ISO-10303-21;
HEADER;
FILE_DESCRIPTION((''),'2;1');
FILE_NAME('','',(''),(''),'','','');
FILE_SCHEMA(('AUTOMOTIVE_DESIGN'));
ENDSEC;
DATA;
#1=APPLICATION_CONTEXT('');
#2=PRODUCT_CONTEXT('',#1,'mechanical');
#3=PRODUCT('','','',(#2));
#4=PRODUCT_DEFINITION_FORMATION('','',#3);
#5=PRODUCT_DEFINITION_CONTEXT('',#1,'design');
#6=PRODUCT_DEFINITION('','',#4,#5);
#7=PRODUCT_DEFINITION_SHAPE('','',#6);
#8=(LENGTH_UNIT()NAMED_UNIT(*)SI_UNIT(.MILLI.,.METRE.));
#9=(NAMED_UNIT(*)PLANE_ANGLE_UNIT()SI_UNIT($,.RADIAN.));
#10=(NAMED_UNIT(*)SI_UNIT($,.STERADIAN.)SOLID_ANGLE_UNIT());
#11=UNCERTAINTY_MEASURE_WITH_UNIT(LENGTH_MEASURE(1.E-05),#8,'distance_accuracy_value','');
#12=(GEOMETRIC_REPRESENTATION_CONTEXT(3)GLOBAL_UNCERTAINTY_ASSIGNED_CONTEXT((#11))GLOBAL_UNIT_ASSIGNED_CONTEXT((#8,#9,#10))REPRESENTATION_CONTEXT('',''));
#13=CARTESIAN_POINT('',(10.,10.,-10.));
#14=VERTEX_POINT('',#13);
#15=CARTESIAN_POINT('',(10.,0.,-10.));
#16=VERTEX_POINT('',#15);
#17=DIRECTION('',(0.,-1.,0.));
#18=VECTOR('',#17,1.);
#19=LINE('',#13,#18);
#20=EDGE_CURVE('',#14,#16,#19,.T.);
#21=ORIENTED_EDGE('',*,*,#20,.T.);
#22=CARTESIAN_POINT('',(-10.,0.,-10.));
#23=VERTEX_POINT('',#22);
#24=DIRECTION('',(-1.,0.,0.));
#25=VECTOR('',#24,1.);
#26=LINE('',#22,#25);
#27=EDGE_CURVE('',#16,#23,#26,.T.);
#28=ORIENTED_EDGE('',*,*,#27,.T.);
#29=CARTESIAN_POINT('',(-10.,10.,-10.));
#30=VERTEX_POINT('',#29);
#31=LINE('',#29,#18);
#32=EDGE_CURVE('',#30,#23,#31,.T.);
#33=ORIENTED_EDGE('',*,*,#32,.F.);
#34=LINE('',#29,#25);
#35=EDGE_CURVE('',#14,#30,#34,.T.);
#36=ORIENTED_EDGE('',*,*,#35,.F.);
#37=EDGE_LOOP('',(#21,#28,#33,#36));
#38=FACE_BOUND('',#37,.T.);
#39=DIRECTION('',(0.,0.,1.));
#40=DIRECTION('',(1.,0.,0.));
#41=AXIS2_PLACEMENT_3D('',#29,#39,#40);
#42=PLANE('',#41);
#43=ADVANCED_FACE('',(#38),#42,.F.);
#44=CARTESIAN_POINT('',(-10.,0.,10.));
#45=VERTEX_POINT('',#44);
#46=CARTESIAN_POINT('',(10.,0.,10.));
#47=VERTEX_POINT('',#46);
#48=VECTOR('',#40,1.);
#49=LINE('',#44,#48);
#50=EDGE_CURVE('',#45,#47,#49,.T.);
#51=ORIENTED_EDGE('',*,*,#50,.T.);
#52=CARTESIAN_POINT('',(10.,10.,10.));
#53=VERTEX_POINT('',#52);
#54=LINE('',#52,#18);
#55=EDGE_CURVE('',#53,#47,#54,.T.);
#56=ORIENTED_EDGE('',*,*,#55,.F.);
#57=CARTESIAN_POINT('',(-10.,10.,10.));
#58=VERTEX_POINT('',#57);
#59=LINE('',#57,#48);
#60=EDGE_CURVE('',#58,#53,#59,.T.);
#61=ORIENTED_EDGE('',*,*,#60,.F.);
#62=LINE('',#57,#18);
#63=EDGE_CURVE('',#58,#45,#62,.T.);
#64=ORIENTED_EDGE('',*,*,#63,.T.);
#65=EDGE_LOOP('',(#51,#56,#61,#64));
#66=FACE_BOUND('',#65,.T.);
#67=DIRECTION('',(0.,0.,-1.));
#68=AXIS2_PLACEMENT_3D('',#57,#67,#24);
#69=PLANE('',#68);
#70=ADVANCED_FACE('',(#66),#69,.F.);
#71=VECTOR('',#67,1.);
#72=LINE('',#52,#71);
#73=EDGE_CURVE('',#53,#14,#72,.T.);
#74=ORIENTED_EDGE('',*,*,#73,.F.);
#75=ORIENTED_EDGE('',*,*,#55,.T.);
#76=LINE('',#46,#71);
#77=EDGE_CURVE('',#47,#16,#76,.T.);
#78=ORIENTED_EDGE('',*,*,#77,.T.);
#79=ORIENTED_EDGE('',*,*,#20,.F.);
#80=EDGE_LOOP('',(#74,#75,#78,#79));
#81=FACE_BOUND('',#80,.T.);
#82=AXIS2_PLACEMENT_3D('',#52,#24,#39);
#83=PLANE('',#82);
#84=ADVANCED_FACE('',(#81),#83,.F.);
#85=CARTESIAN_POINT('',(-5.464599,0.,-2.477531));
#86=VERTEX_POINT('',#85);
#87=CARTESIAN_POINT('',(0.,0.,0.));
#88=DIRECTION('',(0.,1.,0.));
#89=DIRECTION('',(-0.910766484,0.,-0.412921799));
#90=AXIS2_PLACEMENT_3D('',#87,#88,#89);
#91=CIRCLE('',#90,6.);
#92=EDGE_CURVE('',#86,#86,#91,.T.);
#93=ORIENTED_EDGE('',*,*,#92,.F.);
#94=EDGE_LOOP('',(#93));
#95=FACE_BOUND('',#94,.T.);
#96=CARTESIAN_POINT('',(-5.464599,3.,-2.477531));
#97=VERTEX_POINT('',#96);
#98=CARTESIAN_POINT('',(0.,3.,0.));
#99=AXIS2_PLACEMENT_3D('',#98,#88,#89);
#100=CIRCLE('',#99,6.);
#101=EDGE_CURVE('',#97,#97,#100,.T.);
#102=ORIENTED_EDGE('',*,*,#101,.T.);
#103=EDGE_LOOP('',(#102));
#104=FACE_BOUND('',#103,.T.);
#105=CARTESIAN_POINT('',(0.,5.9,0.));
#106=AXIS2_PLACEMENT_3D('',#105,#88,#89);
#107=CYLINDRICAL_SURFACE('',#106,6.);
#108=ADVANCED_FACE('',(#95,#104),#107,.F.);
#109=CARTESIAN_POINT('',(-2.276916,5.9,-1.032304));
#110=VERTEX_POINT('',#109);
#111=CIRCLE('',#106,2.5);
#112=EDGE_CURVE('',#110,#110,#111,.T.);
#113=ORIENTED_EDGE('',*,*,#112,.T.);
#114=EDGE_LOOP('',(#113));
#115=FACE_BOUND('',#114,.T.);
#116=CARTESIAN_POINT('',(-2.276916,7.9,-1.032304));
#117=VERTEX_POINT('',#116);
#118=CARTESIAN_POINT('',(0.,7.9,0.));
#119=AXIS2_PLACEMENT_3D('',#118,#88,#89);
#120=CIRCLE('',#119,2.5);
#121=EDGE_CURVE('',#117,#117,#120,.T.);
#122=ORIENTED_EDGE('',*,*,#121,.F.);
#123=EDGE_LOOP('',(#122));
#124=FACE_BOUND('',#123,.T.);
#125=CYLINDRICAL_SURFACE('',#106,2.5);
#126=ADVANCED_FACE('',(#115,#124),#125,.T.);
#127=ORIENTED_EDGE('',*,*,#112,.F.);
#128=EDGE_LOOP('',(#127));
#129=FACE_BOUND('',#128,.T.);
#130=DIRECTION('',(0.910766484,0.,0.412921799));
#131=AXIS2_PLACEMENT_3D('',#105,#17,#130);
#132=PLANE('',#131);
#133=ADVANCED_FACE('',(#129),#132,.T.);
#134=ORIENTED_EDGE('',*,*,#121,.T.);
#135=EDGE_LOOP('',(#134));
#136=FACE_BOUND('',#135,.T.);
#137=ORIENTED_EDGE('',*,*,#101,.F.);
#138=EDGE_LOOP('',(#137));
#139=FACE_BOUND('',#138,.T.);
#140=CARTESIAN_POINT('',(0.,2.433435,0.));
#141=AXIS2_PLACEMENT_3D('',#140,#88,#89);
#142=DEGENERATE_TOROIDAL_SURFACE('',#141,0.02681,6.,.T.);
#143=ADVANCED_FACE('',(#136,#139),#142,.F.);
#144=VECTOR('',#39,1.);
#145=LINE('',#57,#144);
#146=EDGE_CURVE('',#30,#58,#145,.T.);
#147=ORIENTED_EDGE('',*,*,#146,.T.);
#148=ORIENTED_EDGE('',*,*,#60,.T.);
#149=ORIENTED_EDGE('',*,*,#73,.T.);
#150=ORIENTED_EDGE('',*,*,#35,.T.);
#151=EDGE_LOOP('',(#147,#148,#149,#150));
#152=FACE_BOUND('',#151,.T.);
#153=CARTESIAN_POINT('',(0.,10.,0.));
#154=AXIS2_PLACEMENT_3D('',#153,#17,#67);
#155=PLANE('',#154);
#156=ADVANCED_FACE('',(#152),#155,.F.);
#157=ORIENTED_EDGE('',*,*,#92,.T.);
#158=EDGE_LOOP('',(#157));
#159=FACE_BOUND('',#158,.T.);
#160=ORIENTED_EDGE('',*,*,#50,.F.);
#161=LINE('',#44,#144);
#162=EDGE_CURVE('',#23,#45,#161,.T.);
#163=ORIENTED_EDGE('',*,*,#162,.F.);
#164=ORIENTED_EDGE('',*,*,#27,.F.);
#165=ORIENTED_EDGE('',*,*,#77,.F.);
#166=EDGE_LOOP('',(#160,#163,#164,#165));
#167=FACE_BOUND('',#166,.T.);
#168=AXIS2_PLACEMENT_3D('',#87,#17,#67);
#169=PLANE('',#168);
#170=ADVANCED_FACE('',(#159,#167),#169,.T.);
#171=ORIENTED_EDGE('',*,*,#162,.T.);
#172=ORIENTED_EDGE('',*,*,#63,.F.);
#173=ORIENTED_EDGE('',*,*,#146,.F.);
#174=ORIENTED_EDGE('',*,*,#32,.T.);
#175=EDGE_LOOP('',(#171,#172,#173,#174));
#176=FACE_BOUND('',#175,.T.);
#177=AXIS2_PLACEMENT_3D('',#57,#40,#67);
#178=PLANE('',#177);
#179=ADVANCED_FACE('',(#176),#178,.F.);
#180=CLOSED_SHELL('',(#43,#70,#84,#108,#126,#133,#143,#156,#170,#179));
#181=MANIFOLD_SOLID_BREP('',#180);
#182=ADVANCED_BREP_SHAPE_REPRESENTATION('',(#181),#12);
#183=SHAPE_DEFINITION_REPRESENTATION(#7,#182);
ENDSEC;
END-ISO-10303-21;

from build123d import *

# Parameters (mm, degrees)
SKETCH1_W           = 20
SKETCH1_H           = 20
BOSS_EXTRUDE1_DEPTH = 10


# Read off the part's stored shape, not the designer's step: Cavity1
with BuildPart() as part:
    # Sketch1 → Boss-Extrude1 (new body)
    with BuildSketch(Plane(origin=(0, 0, 0), x_dir=(1, 0, 0), z_dir=(0, 1, 0))):
        Rectangle(SKETCH1_W, SKETCH1_H)
    extrude(amount=BOSS_EXTRUDE1_DEPTH)

    # Cavity1 outline → Cavity1 (revolve, cut)
    with BuildSketch(Plane.XY):
        with BuildLine():
            Line((2.5, 5.9), (0, 5.9))
            Line((0, 5.9), (0, 0))
            Line((0, 0), (6, 0))
            Line((6, 0), (6, 3))
            ThreePointArc((6, 3), (4.909210346, 5.920864533), (2.5, 7.9))
            Line((2.5, 7.9), (2.5, 5.9))
        make_face()
    revolve(axis=Axis((0, 0, 0), (0, 1, 0)), mode=Mode.SUBTRACT)


solid = part.part
